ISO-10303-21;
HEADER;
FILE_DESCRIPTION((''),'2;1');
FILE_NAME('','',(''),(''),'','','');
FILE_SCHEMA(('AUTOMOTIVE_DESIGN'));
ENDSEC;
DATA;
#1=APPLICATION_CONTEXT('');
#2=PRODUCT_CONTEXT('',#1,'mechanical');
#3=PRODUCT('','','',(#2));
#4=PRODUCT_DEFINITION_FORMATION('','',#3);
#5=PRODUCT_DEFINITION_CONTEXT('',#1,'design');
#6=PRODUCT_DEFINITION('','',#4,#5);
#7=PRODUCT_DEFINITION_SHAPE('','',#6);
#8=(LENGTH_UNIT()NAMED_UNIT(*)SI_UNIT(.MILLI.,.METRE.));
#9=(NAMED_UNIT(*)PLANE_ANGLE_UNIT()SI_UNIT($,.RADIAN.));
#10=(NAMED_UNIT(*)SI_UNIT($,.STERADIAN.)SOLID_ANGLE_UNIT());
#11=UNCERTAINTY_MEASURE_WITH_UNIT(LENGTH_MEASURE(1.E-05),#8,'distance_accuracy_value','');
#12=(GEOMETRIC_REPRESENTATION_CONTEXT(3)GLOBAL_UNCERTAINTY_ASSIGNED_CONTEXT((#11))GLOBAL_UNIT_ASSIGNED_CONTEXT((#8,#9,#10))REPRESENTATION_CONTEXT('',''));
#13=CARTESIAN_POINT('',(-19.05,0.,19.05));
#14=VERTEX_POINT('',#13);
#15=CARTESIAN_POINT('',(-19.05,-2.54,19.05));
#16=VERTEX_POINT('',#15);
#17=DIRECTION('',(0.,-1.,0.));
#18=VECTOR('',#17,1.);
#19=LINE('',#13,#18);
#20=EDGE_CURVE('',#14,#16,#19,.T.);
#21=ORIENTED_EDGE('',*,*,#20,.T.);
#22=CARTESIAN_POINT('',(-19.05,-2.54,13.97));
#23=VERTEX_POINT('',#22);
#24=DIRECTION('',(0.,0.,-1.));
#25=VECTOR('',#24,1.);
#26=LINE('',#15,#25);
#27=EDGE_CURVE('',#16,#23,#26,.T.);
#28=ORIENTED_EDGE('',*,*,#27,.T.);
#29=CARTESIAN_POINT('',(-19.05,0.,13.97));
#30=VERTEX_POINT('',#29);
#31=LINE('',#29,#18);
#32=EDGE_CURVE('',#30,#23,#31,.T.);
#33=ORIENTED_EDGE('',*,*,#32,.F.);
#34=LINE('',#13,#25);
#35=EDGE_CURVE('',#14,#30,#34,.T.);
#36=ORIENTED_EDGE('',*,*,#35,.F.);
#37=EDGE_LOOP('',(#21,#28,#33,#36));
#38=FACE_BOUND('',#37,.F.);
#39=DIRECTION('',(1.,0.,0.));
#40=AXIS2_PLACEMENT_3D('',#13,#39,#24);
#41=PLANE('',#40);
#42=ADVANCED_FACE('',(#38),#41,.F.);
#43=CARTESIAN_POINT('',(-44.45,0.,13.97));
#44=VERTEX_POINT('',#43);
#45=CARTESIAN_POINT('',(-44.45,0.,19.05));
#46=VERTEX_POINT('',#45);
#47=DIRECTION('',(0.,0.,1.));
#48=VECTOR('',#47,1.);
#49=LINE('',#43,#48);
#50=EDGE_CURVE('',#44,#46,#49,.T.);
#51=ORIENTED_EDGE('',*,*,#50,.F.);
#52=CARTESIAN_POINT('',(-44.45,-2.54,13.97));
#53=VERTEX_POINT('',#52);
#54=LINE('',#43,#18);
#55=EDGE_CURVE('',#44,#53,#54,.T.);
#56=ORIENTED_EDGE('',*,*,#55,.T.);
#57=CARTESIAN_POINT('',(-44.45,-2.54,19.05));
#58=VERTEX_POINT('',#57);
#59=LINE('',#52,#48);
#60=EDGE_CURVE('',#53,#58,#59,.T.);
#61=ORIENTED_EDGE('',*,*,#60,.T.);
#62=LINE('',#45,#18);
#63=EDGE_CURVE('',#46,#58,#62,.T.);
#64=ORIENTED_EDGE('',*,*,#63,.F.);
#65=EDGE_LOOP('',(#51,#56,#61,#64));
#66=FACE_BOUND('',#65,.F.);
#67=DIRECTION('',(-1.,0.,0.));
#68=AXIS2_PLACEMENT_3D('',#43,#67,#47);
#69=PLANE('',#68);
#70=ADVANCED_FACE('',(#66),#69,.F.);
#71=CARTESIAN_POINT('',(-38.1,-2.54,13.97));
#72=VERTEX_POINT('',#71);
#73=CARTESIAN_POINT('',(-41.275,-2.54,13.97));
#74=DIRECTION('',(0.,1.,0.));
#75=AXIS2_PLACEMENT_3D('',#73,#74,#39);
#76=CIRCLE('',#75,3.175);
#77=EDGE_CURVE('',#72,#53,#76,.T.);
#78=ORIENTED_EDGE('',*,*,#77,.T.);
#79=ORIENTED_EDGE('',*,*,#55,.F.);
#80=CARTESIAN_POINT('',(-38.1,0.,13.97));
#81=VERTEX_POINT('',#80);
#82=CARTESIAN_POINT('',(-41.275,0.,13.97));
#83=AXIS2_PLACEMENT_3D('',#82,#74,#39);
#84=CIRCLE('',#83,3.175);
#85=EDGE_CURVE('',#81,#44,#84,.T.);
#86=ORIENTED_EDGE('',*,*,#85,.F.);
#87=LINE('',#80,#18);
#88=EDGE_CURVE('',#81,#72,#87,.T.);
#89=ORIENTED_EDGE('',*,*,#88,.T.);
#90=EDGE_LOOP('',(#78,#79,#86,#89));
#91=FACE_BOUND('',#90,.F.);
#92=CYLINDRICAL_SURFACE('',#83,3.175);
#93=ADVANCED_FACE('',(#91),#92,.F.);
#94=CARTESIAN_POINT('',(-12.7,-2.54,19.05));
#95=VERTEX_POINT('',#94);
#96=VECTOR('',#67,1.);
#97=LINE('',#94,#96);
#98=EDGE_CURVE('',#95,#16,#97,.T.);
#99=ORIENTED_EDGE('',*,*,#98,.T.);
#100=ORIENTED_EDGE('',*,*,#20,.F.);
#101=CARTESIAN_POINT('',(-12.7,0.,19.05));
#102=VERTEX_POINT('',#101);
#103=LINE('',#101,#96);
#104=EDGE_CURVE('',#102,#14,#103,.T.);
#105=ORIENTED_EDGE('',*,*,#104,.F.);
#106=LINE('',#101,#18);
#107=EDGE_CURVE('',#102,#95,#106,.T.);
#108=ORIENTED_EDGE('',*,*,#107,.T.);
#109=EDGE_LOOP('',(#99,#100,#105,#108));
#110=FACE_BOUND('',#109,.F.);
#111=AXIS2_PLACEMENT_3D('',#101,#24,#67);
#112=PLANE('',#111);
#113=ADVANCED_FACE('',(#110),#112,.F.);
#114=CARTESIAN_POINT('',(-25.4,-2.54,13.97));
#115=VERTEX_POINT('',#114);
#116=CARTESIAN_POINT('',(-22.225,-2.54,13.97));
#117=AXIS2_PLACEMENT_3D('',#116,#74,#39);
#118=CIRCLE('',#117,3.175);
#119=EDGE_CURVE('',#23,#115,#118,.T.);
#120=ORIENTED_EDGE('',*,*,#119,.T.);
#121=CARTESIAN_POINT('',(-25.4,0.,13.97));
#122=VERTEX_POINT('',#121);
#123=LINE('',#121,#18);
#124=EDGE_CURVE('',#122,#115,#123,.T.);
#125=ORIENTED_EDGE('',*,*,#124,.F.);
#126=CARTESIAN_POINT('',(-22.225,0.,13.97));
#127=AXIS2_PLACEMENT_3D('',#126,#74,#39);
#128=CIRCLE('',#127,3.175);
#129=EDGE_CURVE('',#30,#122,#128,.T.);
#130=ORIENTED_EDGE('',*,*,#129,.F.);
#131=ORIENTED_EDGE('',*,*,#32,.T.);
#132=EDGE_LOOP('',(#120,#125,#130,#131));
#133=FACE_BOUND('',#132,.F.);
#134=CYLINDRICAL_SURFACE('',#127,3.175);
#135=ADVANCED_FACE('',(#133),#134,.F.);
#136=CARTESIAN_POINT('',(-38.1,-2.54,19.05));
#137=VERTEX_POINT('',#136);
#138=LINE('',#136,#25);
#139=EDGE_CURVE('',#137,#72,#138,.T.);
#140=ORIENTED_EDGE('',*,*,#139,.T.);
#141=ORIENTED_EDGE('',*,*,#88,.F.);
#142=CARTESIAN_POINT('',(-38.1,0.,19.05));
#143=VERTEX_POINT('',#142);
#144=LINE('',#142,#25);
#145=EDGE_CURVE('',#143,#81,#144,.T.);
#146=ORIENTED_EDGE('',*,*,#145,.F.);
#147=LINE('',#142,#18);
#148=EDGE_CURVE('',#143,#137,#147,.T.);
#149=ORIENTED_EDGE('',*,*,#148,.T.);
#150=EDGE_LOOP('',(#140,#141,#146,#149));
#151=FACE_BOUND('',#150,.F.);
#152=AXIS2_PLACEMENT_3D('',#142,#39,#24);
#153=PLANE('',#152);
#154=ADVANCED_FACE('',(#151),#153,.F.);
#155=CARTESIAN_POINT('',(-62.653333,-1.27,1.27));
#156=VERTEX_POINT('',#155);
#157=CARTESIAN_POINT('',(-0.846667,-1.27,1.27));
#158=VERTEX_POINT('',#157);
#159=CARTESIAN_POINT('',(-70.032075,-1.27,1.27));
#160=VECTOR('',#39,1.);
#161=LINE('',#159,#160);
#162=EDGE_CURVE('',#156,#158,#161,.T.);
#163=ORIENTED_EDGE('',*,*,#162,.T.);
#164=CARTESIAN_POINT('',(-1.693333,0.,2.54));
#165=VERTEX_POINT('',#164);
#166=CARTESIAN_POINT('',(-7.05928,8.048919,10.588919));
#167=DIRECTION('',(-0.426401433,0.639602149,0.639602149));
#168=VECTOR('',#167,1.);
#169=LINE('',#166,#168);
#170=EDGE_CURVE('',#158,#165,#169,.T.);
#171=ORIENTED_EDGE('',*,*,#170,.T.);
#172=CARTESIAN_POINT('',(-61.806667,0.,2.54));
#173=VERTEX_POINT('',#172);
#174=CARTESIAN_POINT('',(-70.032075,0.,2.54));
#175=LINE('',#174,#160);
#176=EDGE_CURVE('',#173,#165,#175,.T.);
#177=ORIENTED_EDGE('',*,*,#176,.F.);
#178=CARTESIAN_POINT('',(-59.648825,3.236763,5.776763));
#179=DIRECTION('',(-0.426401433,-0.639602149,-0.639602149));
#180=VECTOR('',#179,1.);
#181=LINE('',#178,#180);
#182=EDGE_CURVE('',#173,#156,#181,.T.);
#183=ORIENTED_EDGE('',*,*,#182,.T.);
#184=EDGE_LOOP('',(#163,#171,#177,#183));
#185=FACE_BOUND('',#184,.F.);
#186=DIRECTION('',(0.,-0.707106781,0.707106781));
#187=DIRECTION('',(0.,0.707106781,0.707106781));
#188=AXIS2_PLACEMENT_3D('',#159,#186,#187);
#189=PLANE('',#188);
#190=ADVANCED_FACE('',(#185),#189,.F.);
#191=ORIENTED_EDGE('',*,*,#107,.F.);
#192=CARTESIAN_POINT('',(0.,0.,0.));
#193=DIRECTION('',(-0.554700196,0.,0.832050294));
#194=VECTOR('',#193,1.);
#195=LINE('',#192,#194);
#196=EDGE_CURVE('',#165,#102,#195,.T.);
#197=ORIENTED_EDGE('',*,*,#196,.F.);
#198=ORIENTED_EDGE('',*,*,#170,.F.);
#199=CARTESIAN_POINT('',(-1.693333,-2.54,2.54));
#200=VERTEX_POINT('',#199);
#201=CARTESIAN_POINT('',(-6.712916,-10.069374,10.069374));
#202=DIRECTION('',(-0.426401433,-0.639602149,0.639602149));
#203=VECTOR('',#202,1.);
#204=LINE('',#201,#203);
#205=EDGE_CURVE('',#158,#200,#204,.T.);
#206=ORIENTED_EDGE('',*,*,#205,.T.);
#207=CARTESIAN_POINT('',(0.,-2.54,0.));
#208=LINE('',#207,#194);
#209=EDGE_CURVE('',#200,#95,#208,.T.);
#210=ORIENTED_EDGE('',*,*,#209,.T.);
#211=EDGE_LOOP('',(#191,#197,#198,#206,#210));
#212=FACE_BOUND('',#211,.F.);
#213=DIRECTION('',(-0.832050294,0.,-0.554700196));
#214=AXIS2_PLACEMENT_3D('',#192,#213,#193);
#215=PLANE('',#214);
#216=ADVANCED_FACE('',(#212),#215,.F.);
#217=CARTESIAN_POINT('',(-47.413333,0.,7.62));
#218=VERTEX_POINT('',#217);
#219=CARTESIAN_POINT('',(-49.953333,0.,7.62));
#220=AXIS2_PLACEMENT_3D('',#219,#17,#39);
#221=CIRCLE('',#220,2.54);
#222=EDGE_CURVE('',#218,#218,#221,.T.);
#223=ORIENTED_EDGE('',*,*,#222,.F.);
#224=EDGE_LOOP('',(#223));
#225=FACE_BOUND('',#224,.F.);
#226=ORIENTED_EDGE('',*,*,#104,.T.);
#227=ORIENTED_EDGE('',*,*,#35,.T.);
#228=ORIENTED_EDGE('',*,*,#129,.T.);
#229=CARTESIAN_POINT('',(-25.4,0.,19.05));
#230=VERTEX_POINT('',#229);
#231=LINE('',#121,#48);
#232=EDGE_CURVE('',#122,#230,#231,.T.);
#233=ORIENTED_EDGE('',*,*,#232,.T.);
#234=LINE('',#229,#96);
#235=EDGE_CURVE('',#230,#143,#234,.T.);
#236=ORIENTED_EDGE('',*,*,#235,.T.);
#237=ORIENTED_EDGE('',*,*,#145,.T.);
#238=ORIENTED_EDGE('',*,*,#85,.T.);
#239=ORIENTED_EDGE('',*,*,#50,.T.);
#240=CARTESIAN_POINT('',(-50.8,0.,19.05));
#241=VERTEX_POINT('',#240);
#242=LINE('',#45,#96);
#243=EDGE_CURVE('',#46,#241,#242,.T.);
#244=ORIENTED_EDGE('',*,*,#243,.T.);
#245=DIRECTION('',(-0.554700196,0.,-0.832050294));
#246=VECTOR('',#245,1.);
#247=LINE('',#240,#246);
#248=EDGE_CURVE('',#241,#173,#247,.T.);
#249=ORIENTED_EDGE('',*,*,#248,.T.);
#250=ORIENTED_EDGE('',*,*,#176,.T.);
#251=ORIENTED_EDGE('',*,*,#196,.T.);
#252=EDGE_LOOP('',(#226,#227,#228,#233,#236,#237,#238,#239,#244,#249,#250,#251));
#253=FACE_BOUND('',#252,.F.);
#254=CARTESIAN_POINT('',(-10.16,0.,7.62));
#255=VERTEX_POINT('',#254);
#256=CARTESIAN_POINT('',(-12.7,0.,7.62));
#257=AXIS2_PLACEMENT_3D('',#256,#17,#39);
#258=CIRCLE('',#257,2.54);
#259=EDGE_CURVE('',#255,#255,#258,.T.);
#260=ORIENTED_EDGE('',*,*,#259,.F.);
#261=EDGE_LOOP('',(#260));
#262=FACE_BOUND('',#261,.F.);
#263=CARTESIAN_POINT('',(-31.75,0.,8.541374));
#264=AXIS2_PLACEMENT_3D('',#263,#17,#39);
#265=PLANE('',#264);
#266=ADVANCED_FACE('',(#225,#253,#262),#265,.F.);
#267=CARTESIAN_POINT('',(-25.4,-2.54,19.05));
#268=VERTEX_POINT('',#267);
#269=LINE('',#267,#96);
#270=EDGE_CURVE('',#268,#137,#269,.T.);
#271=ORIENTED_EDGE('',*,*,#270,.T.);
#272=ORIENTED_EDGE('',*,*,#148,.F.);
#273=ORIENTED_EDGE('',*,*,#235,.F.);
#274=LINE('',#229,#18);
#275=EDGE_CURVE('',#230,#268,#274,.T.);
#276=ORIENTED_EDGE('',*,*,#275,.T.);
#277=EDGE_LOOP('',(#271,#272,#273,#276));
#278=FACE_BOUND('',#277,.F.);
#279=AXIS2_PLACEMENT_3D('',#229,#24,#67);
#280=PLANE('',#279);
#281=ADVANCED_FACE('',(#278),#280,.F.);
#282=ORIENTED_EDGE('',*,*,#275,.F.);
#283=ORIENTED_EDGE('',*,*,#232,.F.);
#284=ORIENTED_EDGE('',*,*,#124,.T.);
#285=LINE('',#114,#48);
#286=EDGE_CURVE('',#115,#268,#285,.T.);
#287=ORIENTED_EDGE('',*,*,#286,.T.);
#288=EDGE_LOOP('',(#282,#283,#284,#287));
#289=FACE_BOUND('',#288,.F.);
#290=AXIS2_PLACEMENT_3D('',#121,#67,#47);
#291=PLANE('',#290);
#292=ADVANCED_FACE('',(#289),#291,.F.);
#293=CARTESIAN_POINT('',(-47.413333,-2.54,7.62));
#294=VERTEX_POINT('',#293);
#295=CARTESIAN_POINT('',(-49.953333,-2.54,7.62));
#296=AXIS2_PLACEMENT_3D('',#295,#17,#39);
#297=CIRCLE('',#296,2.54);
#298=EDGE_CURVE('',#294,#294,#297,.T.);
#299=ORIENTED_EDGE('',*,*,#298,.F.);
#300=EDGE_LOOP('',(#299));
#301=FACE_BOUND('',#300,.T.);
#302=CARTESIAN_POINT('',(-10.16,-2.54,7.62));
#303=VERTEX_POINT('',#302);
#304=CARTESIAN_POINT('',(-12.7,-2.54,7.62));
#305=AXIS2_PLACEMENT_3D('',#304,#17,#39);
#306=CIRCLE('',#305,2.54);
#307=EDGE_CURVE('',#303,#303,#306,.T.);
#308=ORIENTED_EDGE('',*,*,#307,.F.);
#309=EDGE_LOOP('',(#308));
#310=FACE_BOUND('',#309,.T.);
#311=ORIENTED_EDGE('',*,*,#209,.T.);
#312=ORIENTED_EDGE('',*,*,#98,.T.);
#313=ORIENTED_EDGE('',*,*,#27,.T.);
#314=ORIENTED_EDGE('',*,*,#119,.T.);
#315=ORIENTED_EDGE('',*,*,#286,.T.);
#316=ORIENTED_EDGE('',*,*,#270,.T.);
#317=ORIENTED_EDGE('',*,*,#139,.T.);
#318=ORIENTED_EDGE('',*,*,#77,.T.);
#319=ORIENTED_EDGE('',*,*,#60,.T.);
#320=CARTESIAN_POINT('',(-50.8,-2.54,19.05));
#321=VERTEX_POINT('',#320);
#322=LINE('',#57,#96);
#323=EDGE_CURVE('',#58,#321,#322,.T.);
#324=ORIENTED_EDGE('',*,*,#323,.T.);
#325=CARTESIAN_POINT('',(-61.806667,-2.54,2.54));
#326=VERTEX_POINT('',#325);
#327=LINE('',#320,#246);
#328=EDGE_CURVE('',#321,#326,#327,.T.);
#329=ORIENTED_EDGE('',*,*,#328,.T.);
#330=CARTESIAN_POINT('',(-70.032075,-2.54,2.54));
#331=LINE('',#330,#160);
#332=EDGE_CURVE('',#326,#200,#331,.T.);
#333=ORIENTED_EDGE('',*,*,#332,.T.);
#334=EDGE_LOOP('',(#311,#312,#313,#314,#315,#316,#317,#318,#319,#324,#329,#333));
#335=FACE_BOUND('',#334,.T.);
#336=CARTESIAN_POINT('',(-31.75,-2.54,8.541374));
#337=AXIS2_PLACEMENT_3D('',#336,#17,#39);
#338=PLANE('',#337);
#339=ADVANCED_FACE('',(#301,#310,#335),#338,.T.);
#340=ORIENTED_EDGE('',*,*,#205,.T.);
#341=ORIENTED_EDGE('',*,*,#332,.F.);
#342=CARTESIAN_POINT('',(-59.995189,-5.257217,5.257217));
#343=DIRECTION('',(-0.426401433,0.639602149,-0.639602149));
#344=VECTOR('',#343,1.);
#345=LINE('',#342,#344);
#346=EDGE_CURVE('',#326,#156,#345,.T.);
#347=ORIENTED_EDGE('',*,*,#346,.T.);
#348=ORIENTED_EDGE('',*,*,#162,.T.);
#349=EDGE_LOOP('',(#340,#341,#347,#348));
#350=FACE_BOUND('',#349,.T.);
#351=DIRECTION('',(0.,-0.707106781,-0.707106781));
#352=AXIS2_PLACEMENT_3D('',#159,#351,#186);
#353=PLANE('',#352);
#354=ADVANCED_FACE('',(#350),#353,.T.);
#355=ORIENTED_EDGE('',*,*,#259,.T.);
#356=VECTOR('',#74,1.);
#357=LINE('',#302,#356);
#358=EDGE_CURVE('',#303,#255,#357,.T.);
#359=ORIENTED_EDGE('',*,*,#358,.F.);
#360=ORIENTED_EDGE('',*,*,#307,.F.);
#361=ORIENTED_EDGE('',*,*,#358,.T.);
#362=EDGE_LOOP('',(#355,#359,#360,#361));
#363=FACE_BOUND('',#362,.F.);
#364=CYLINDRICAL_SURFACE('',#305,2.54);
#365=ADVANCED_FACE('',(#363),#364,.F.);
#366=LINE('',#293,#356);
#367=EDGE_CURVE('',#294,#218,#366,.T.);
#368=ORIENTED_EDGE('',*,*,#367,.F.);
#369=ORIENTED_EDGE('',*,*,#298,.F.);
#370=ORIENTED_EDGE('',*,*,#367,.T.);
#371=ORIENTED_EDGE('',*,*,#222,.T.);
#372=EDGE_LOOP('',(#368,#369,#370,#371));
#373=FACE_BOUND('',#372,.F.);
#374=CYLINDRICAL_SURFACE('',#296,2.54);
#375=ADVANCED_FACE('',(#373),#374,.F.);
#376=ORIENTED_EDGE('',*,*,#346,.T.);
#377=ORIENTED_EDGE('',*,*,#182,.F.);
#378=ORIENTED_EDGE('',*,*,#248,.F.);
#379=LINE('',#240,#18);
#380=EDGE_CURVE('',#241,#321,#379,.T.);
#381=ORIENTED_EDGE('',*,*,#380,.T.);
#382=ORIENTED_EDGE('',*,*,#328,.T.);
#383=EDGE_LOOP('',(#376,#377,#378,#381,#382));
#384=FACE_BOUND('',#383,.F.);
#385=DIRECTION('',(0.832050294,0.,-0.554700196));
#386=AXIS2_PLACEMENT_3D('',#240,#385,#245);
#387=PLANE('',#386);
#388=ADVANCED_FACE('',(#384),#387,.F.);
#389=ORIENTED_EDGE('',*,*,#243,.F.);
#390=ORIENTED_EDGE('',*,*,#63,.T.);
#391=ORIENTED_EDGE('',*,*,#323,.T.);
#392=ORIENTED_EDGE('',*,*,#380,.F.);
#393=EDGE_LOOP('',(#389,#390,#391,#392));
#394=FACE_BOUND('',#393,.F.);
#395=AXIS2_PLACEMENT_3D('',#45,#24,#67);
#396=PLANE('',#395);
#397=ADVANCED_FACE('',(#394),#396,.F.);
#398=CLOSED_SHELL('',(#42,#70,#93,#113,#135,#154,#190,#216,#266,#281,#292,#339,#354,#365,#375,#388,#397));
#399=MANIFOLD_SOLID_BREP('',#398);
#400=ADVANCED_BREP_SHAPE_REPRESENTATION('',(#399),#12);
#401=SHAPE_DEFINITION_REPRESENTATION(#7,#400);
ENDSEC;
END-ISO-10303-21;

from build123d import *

# Parameters (mm, degrees)
F1_DEPTH    = 2.54
F2_T1_DEPTH = 76.5641495789
F3_R        = 2.54
F4_DEPTH    = 2.54


# Not quite as in the source:
# - a fillet or chamfer that OpenCascade refuses, or shapes differently, is made with other operations: its cross-section is extruded or revolved along the edge and cut away or added


with BuildPart() as f1:
    # F0 (on Front) → F1 (new body)
    with BuildSketch(Plane.XZ):
        with BuildLine():
            Line((-63.5, 0), (0, 0))
            Line((0, 0), (-12.7, 19.05))
            Line((-12.7, 19.05), (-19.05, 19.05))
            Line((-19.05, 19.05), (-19.05, 13.97))
            ThreePointArc((-19.05, 13.97), (-22.225, 10.795), (-25.4, 13.97))
            Line((-25.4, 13.97), (-25.4, 19.05))
            Line((-25.4, 19.05), (-38.1, 19.05))
            Line((-38.1, 19.05), (-38.1, 13.97))
            ThreePointArc((-38.1, 13.97), (-41.275, 10.795), (-44.45, 13.97))
            Line((-44.45, 13.97), (-44.45, 19.05))
            Line((-44.45, 19.05), (-50.8, 19.05))
            Line((-50.8, 19.05), (-63.5, 0))
        make_face()
    extrude(amount=F1_DEPTH)

    # F2: chamfer of 2.54 on 2 edges, made by hand

    # F2_s2 → F2_t1 (cut)
    with BuildSketch(Plane.YZ.offset(-70.0320747894)):
        Polygon((0, 0), (-2.54, 2.54), (-2.54, 0), align=None)
        Polygon((-2.54, 0), (0, 2.54), (0, 0), align=None)
    extrude(amount=F2_T1_DEPTH, mode=Mode.SUBTRACT)

    # F3 (on face) → F4 (cut)
    with BuildSketch(Plane.XZ.offset(2.54)):
        with Locations((-12.7, 7.62)):
            Circle(F3_R)
        with Locations((-49.9533333333, 7.62)):
            Circle(F3_R)
    extrude(amount=-F4_DEPTH, mode=Mode.SUBTRACT)


solid = f1.part
